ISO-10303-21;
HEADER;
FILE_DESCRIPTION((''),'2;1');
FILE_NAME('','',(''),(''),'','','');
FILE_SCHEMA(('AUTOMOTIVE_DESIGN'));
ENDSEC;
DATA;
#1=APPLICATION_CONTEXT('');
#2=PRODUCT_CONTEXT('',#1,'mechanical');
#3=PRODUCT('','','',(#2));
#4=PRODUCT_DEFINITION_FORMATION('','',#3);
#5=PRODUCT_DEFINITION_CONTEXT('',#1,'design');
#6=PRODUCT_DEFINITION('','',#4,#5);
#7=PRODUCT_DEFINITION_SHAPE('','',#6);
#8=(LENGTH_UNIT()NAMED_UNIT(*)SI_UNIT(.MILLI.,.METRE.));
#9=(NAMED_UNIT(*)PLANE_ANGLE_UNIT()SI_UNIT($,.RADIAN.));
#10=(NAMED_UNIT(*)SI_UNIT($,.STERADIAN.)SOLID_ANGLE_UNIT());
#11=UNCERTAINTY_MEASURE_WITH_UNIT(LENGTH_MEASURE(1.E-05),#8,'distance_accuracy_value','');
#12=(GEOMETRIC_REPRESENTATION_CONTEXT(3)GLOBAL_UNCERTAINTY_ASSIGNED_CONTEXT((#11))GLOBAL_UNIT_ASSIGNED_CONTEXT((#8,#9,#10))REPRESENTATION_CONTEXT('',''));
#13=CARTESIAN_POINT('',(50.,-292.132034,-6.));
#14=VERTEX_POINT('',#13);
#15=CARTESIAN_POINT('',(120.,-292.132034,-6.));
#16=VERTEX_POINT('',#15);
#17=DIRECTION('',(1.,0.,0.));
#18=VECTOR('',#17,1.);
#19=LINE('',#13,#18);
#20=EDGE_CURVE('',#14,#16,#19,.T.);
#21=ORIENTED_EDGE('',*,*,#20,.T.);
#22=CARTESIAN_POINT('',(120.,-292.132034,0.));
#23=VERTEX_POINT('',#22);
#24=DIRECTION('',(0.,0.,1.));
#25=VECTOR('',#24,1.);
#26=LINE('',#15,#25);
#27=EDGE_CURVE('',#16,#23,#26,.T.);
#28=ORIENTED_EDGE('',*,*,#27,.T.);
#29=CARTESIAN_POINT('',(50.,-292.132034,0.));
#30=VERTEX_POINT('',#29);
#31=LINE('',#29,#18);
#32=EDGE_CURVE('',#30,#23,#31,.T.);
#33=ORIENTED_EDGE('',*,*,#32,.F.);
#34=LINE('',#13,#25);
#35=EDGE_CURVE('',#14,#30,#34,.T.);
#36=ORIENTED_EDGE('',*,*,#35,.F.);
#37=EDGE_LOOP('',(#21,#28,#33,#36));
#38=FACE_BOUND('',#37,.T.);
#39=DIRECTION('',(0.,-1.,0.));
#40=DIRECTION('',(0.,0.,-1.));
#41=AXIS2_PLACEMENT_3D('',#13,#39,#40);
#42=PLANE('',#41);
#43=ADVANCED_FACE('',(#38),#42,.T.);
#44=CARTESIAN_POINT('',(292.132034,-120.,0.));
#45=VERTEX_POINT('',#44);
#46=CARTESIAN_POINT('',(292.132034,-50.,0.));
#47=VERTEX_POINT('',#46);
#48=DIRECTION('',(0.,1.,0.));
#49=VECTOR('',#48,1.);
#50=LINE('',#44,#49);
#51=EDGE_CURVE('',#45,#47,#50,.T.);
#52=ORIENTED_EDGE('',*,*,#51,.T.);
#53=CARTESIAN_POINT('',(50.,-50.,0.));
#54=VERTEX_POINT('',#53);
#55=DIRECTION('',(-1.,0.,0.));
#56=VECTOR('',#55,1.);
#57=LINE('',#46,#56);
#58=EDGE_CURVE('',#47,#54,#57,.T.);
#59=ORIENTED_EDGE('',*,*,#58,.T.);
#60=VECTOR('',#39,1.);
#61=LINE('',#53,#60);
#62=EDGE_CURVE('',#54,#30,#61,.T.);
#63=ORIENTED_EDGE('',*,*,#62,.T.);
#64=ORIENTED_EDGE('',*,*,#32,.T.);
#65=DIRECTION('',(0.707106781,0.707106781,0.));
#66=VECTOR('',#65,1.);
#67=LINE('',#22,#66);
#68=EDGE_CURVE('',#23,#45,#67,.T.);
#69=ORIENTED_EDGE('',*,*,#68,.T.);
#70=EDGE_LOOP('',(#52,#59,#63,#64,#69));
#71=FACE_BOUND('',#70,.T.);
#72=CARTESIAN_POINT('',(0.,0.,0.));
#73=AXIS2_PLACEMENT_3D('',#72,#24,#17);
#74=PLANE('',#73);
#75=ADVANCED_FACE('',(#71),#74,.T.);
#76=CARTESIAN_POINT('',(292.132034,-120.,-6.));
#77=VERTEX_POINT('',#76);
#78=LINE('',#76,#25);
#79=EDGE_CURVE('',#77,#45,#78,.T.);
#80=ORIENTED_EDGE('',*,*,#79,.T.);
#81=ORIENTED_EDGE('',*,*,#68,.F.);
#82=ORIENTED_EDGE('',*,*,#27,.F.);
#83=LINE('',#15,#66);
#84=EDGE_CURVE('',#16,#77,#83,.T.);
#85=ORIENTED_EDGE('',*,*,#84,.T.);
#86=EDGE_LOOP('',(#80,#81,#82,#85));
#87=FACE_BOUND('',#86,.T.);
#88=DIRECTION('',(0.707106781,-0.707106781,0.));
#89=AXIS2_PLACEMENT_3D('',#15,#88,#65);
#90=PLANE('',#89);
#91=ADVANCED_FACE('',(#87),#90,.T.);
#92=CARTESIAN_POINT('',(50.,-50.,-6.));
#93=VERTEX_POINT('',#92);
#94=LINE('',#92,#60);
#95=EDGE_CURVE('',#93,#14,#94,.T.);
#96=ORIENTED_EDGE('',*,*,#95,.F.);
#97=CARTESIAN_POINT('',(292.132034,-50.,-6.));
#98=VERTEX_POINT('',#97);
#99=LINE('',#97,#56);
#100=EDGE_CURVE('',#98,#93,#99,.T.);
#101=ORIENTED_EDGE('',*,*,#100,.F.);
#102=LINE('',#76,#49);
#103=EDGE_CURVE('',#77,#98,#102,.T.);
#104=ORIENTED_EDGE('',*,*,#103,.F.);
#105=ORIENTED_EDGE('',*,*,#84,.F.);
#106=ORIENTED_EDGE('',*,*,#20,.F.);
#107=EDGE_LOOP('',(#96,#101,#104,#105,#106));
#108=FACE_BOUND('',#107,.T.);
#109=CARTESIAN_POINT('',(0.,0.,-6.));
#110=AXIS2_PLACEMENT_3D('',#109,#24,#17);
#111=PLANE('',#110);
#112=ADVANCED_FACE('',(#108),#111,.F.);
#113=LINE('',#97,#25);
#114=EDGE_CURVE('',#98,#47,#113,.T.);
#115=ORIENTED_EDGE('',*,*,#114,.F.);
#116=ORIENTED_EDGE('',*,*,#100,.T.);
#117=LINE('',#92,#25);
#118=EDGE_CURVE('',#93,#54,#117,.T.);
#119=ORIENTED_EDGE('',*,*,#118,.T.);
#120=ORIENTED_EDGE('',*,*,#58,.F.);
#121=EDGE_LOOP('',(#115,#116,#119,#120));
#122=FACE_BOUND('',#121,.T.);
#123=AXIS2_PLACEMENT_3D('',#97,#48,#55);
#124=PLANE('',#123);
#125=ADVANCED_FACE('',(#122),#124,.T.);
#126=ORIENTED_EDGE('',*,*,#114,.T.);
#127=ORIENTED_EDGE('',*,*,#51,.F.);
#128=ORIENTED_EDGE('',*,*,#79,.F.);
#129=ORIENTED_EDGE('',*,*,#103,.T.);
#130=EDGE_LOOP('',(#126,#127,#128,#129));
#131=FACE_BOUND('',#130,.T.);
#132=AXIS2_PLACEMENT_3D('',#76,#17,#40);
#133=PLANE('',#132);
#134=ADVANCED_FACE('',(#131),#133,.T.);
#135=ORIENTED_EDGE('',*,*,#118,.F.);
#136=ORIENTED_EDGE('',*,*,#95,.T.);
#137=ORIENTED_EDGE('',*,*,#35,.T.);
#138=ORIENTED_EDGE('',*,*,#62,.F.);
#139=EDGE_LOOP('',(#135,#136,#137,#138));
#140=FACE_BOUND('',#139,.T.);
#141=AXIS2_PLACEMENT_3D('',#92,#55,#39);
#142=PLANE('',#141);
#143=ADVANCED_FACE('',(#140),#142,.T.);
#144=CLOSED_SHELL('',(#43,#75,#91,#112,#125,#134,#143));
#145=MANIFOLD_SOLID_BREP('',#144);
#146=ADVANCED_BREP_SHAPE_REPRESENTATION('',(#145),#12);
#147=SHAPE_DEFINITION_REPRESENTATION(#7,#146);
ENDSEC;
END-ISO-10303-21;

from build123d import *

# Parameters (mm, degrees)
SM_BASE_FLANGE_1_DEPTH = 6


# Sheet-metal steps are written as plain solids
with BuildPart() as part:
    # Sketch 1 → Базовая кромка1 (new body)
    with BuildSketch(Plane.XY):
        Polygon((292.132034356, -50), (50, -50), (50, -292.132034356), (120, -292.132034356), (292.132034356, -120), align=None)
    extrude(amount=-SM_BASE_FLANGE_1_DEPTH)


solid = part.part
